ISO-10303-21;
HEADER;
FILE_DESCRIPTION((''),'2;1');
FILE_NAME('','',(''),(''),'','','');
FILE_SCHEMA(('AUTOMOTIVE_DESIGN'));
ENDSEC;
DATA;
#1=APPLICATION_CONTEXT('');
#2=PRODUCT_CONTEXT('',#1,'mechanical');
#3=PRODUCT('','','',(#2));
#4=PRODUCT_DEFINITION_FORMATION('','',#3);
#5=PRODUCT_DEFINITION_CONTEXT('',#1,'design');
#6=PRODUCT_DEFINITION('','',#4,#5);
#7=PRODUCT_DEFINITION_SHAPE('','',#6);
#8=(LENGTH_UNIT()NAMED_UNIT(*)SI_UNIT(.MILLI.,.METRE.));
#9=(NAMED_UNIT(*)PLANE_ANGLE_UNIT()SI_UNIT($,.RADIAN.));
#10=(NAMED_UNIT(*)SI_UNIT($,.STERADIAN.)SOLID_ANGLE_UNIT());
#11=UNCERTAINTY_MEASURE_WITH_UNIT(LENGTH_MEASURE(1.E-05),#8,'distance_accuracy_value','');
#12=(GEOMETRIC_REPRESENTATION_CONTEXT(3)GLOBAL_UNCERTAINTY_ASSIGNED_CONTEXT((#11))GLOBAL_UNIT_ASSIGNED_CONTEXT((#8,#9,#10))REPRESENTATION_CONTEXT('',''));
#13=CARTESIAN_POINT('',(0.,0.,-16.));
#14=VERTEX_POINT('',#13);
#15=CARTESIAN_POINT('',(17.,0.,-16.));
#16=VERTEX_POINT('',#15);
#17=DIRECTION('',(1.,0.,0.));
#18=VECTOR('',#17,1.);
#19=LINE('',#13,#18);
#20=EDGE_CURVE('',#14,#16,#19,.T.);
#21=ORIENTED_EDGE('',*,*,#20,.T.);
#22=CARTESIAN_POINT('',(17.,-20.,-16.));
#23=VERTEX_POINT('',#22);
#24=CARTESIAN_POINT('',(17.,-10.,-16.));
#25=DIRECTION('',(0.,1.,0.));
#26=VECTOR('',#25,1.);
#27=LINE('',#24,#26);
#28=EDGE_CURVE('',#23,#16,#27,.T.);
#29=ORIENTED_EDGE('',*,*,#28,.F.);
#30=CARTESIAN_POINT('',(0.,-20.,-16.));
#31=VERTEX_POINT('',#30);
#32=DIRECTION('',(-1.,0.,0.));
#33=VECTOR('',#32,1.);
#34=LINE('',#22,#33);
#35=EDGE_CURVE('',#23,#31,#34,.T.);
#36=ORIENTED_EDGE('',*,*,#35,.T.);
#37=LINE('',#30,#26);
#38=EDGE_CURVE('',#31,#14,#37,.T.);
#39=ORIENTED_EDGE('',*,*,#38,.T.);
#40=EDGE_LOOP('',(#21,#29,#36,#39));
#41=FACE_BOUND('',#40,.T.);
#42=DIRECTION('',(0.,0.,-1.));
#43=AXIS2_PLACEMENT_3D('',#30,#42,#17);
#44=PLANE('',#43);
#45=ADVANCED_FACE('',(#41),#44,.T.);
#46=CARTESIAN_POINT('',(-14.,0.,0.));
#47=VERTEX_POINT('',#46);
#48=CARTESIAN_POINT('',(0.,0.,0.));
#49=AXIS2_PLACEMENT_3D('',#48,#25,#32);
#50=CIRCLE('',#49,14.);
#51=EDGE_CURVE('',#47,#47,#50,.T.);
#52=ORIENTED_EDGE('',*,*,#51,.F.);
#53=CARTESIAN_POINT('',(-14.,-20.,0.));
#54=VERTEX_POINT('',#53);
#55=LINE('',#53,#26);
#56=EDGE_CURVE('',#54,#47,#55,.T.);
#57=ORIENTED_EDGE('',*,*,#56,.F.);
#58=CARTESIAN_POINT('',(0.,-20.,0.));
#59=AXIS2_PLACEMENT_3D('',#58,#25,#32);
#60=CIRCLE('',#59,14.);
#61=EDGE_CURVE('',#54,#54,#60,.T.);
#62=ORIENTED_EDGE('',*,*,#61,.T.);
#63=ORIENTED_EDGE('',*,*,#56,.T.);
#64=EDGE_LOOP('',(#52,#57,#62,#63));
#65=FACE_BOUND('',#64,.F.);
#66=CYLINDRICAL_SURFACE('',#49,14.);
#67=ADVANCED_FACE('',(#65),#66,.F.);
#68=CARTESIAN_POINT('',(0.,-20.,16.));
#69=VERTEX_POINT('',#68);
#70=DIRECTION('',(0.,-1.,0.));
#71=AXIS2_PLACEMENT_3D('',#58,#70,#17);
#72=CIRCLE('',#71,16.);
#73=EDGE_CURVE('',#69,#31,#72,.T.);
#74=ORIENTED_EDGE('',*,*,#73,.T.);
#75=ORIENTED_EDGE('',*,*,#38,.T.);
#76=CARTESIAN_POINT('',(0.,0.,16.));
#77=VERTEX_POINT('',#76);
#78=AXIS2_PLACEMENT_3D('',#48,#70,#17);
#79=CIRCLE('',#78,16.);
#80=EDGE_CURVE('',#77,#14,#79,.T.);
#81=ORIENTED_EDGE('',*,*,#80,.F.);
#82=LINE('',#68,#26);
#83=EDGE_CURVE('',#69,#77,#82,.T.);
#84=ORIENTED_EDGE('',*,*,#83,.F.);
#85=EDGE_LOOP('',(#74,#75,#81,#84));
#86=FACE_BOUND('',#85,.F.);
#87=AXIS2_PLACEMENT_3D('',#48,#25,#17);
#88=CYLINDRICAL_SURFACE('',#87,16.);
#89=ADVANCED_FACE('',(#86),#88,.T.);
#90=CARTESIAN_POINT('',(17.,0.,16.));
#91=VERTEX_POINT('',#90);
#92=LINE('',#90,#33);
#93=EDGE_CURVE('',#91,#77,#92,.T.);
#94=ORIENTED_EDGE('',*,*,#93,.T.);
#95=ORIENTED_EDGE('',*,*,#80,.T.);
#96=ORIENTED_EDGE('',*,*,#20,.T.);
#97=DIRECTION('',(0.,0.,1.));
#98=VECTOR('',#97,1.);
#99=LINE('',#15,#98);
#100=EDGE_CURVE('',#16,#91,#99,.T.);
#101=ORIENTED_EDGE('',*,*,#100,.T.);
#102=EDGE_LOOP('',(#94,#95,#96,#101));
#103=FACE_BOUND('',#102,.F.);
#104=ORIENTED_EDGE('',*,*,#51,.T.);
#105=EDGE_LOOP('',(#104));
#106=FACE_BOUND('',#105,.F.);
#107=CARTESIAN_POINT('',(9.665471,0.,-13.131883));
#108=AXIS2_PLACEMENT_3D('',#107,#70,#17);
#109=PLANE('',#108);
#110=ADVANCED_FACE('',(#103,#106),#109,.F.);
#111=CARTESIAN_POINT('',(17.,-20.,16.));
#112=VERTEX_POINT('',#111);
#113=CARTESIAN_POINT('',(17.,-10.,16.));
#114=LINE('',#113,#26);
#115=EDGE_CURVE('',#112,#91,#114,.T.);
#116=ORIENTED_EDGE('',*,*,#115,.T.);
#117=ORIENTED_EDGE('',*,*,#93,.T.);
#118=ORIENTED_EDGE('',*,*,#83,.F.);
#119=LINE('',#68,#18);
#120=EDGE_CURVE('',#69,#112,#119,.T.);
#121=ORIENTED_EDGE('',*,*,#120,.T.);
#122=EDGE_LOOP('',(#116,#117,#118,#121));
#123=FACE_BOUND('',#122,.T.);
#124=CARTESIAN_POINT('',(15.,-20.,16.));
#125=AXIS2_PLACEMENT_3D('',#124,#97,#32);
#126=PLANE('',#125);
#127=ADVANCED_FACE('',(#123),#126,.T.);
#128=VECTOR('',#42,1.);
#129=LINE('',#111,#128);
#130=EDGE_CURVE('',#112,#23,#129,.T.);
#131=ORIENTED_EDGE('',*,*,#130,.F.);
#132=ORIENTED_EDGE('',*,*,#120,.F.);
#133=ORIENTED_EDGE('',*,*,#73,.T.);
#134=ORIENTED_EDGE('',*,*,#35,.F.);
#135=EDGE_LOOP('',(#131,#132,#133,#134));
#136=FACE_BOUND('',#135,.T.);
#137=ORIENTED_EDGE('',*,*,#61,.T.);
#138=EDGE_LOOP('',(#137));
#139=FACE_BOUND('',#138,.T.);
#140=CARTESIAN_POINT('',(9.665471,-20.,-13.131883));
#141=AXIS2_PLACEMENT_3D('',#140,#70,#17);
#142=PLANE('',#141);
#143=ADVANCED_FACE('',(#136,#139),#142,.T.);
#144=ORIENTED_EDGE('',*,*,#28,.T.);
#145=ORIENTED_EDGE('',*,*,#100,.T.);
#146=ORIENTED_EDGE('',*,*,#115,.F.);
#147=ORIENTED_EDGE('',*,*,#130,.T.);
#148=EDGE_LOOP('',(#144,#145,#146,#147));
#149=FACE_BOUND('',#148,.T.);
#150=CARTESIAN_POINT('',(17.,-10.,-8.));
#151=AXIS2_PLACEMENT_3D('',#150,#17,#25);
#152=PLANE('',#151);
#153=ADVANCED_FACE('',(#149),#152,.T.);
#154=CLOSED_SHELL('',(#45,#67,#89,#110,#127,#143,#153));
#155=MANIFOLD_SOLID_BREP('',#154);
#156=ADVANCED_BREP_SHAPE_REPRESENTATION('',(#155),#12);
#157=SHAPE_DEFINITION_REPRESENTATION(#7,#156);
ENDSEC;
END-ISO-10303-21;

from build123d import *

# Parameters (mm, degrees)
F0_R      = 16
F0_R_2    = 10.5
F1_DEPTH  = 20
F2_R      = 12.5
F3_DEPTH  = 15
F4_DEPTH  = 15.001
F5_R      = 14
F6_DEPTH  = 15
F8_W      = 20
F8_H      = 16
F9_DEPTH  = 2
F11_DEPTH = 20
F14_DEPTH = 20
F15_DEPTH = 5.001


with BuildPart() as f1:
    # F0 (on Front) → F1 (new body)
    with BuildSketch(Plane.XZ):
        Circle(F0_R)
        Circle(F0_R_2, mode=Mode.SUBTRACT)
    extrude(amount=F1_DEPTH)

    # F2 (on face) → F3 (join)
    with BuildSketch(Plane.XZ.offset(20)):
        Circle(F2_R)
    extrude(amount=-F3_DEPTH)

    # F4 (cut, through all): a face of the model
    f4_faces = [f1.faces().sort_by_distance(p)[0] for p in [
        (0, -5, 0),
    ]]
    extrude(f4_faces, amount=-F4_DEPTH, mode=Mode.SUBTRACT)

    # F5 (on face) → F6 (cut)
    with BuildSketch(Plane(origin=(0, 0, 0), x_dir=(-1, 0, 0), z_dir=(0, 1, 0))):
        Circle(F5_R)
    extrude(amount=-F6_DEPTH, mode=Mode.SUBTRACT)

    # F8 (on offset) → F9 (join)
    with BuildSketch(Plane.YZ.offset(15)):
        with Locations((-10, -8)):
            Rectangle(F8_W, F8_H)
        with Locations((-10, 8)):
            Rectangle(F8_W, F8_H)
    extrude(amount=F9_DEPTH)

    # F10 (on face) → F11 (join)
    with BuildSketch(Plane.XZ.offset(20)):
        with BuildLine():
            Line((15, 16), (0, 16))
            ThreePointArc((0, 16), (9.1355287257, 13.1355287257), (15, 5.5677643628))
            Line((15, 5.5677643628), (15, 16))
        make_face()
    extrude(amount=-F11_DEPTH)

    # F13 (on face) → F14 (join)
    with BuildSketch(Plane.XZ.offset(20)):
        with BuildLine():
            Line((0, -16), (15, -16))
            Line((15, -16), (15, -5.5677643628))
            ThreePointArc((15, -5.5677643628), (9.1355287257, -13.1355287257), (0, -16))
        make_face()
    extrude(amount=-F14_DEPTH)

    # F15 (cut, through all): a face of the model
    f15_faces = [f1.faces().sort_by_distance(p)[0] for p in [
        (13.6040202025, -15, 0),
    ]]
    extrude(f15_faces, amount=-F15_DEPTH, mode=Mode.SUBTRACT)


solid = f1.part
